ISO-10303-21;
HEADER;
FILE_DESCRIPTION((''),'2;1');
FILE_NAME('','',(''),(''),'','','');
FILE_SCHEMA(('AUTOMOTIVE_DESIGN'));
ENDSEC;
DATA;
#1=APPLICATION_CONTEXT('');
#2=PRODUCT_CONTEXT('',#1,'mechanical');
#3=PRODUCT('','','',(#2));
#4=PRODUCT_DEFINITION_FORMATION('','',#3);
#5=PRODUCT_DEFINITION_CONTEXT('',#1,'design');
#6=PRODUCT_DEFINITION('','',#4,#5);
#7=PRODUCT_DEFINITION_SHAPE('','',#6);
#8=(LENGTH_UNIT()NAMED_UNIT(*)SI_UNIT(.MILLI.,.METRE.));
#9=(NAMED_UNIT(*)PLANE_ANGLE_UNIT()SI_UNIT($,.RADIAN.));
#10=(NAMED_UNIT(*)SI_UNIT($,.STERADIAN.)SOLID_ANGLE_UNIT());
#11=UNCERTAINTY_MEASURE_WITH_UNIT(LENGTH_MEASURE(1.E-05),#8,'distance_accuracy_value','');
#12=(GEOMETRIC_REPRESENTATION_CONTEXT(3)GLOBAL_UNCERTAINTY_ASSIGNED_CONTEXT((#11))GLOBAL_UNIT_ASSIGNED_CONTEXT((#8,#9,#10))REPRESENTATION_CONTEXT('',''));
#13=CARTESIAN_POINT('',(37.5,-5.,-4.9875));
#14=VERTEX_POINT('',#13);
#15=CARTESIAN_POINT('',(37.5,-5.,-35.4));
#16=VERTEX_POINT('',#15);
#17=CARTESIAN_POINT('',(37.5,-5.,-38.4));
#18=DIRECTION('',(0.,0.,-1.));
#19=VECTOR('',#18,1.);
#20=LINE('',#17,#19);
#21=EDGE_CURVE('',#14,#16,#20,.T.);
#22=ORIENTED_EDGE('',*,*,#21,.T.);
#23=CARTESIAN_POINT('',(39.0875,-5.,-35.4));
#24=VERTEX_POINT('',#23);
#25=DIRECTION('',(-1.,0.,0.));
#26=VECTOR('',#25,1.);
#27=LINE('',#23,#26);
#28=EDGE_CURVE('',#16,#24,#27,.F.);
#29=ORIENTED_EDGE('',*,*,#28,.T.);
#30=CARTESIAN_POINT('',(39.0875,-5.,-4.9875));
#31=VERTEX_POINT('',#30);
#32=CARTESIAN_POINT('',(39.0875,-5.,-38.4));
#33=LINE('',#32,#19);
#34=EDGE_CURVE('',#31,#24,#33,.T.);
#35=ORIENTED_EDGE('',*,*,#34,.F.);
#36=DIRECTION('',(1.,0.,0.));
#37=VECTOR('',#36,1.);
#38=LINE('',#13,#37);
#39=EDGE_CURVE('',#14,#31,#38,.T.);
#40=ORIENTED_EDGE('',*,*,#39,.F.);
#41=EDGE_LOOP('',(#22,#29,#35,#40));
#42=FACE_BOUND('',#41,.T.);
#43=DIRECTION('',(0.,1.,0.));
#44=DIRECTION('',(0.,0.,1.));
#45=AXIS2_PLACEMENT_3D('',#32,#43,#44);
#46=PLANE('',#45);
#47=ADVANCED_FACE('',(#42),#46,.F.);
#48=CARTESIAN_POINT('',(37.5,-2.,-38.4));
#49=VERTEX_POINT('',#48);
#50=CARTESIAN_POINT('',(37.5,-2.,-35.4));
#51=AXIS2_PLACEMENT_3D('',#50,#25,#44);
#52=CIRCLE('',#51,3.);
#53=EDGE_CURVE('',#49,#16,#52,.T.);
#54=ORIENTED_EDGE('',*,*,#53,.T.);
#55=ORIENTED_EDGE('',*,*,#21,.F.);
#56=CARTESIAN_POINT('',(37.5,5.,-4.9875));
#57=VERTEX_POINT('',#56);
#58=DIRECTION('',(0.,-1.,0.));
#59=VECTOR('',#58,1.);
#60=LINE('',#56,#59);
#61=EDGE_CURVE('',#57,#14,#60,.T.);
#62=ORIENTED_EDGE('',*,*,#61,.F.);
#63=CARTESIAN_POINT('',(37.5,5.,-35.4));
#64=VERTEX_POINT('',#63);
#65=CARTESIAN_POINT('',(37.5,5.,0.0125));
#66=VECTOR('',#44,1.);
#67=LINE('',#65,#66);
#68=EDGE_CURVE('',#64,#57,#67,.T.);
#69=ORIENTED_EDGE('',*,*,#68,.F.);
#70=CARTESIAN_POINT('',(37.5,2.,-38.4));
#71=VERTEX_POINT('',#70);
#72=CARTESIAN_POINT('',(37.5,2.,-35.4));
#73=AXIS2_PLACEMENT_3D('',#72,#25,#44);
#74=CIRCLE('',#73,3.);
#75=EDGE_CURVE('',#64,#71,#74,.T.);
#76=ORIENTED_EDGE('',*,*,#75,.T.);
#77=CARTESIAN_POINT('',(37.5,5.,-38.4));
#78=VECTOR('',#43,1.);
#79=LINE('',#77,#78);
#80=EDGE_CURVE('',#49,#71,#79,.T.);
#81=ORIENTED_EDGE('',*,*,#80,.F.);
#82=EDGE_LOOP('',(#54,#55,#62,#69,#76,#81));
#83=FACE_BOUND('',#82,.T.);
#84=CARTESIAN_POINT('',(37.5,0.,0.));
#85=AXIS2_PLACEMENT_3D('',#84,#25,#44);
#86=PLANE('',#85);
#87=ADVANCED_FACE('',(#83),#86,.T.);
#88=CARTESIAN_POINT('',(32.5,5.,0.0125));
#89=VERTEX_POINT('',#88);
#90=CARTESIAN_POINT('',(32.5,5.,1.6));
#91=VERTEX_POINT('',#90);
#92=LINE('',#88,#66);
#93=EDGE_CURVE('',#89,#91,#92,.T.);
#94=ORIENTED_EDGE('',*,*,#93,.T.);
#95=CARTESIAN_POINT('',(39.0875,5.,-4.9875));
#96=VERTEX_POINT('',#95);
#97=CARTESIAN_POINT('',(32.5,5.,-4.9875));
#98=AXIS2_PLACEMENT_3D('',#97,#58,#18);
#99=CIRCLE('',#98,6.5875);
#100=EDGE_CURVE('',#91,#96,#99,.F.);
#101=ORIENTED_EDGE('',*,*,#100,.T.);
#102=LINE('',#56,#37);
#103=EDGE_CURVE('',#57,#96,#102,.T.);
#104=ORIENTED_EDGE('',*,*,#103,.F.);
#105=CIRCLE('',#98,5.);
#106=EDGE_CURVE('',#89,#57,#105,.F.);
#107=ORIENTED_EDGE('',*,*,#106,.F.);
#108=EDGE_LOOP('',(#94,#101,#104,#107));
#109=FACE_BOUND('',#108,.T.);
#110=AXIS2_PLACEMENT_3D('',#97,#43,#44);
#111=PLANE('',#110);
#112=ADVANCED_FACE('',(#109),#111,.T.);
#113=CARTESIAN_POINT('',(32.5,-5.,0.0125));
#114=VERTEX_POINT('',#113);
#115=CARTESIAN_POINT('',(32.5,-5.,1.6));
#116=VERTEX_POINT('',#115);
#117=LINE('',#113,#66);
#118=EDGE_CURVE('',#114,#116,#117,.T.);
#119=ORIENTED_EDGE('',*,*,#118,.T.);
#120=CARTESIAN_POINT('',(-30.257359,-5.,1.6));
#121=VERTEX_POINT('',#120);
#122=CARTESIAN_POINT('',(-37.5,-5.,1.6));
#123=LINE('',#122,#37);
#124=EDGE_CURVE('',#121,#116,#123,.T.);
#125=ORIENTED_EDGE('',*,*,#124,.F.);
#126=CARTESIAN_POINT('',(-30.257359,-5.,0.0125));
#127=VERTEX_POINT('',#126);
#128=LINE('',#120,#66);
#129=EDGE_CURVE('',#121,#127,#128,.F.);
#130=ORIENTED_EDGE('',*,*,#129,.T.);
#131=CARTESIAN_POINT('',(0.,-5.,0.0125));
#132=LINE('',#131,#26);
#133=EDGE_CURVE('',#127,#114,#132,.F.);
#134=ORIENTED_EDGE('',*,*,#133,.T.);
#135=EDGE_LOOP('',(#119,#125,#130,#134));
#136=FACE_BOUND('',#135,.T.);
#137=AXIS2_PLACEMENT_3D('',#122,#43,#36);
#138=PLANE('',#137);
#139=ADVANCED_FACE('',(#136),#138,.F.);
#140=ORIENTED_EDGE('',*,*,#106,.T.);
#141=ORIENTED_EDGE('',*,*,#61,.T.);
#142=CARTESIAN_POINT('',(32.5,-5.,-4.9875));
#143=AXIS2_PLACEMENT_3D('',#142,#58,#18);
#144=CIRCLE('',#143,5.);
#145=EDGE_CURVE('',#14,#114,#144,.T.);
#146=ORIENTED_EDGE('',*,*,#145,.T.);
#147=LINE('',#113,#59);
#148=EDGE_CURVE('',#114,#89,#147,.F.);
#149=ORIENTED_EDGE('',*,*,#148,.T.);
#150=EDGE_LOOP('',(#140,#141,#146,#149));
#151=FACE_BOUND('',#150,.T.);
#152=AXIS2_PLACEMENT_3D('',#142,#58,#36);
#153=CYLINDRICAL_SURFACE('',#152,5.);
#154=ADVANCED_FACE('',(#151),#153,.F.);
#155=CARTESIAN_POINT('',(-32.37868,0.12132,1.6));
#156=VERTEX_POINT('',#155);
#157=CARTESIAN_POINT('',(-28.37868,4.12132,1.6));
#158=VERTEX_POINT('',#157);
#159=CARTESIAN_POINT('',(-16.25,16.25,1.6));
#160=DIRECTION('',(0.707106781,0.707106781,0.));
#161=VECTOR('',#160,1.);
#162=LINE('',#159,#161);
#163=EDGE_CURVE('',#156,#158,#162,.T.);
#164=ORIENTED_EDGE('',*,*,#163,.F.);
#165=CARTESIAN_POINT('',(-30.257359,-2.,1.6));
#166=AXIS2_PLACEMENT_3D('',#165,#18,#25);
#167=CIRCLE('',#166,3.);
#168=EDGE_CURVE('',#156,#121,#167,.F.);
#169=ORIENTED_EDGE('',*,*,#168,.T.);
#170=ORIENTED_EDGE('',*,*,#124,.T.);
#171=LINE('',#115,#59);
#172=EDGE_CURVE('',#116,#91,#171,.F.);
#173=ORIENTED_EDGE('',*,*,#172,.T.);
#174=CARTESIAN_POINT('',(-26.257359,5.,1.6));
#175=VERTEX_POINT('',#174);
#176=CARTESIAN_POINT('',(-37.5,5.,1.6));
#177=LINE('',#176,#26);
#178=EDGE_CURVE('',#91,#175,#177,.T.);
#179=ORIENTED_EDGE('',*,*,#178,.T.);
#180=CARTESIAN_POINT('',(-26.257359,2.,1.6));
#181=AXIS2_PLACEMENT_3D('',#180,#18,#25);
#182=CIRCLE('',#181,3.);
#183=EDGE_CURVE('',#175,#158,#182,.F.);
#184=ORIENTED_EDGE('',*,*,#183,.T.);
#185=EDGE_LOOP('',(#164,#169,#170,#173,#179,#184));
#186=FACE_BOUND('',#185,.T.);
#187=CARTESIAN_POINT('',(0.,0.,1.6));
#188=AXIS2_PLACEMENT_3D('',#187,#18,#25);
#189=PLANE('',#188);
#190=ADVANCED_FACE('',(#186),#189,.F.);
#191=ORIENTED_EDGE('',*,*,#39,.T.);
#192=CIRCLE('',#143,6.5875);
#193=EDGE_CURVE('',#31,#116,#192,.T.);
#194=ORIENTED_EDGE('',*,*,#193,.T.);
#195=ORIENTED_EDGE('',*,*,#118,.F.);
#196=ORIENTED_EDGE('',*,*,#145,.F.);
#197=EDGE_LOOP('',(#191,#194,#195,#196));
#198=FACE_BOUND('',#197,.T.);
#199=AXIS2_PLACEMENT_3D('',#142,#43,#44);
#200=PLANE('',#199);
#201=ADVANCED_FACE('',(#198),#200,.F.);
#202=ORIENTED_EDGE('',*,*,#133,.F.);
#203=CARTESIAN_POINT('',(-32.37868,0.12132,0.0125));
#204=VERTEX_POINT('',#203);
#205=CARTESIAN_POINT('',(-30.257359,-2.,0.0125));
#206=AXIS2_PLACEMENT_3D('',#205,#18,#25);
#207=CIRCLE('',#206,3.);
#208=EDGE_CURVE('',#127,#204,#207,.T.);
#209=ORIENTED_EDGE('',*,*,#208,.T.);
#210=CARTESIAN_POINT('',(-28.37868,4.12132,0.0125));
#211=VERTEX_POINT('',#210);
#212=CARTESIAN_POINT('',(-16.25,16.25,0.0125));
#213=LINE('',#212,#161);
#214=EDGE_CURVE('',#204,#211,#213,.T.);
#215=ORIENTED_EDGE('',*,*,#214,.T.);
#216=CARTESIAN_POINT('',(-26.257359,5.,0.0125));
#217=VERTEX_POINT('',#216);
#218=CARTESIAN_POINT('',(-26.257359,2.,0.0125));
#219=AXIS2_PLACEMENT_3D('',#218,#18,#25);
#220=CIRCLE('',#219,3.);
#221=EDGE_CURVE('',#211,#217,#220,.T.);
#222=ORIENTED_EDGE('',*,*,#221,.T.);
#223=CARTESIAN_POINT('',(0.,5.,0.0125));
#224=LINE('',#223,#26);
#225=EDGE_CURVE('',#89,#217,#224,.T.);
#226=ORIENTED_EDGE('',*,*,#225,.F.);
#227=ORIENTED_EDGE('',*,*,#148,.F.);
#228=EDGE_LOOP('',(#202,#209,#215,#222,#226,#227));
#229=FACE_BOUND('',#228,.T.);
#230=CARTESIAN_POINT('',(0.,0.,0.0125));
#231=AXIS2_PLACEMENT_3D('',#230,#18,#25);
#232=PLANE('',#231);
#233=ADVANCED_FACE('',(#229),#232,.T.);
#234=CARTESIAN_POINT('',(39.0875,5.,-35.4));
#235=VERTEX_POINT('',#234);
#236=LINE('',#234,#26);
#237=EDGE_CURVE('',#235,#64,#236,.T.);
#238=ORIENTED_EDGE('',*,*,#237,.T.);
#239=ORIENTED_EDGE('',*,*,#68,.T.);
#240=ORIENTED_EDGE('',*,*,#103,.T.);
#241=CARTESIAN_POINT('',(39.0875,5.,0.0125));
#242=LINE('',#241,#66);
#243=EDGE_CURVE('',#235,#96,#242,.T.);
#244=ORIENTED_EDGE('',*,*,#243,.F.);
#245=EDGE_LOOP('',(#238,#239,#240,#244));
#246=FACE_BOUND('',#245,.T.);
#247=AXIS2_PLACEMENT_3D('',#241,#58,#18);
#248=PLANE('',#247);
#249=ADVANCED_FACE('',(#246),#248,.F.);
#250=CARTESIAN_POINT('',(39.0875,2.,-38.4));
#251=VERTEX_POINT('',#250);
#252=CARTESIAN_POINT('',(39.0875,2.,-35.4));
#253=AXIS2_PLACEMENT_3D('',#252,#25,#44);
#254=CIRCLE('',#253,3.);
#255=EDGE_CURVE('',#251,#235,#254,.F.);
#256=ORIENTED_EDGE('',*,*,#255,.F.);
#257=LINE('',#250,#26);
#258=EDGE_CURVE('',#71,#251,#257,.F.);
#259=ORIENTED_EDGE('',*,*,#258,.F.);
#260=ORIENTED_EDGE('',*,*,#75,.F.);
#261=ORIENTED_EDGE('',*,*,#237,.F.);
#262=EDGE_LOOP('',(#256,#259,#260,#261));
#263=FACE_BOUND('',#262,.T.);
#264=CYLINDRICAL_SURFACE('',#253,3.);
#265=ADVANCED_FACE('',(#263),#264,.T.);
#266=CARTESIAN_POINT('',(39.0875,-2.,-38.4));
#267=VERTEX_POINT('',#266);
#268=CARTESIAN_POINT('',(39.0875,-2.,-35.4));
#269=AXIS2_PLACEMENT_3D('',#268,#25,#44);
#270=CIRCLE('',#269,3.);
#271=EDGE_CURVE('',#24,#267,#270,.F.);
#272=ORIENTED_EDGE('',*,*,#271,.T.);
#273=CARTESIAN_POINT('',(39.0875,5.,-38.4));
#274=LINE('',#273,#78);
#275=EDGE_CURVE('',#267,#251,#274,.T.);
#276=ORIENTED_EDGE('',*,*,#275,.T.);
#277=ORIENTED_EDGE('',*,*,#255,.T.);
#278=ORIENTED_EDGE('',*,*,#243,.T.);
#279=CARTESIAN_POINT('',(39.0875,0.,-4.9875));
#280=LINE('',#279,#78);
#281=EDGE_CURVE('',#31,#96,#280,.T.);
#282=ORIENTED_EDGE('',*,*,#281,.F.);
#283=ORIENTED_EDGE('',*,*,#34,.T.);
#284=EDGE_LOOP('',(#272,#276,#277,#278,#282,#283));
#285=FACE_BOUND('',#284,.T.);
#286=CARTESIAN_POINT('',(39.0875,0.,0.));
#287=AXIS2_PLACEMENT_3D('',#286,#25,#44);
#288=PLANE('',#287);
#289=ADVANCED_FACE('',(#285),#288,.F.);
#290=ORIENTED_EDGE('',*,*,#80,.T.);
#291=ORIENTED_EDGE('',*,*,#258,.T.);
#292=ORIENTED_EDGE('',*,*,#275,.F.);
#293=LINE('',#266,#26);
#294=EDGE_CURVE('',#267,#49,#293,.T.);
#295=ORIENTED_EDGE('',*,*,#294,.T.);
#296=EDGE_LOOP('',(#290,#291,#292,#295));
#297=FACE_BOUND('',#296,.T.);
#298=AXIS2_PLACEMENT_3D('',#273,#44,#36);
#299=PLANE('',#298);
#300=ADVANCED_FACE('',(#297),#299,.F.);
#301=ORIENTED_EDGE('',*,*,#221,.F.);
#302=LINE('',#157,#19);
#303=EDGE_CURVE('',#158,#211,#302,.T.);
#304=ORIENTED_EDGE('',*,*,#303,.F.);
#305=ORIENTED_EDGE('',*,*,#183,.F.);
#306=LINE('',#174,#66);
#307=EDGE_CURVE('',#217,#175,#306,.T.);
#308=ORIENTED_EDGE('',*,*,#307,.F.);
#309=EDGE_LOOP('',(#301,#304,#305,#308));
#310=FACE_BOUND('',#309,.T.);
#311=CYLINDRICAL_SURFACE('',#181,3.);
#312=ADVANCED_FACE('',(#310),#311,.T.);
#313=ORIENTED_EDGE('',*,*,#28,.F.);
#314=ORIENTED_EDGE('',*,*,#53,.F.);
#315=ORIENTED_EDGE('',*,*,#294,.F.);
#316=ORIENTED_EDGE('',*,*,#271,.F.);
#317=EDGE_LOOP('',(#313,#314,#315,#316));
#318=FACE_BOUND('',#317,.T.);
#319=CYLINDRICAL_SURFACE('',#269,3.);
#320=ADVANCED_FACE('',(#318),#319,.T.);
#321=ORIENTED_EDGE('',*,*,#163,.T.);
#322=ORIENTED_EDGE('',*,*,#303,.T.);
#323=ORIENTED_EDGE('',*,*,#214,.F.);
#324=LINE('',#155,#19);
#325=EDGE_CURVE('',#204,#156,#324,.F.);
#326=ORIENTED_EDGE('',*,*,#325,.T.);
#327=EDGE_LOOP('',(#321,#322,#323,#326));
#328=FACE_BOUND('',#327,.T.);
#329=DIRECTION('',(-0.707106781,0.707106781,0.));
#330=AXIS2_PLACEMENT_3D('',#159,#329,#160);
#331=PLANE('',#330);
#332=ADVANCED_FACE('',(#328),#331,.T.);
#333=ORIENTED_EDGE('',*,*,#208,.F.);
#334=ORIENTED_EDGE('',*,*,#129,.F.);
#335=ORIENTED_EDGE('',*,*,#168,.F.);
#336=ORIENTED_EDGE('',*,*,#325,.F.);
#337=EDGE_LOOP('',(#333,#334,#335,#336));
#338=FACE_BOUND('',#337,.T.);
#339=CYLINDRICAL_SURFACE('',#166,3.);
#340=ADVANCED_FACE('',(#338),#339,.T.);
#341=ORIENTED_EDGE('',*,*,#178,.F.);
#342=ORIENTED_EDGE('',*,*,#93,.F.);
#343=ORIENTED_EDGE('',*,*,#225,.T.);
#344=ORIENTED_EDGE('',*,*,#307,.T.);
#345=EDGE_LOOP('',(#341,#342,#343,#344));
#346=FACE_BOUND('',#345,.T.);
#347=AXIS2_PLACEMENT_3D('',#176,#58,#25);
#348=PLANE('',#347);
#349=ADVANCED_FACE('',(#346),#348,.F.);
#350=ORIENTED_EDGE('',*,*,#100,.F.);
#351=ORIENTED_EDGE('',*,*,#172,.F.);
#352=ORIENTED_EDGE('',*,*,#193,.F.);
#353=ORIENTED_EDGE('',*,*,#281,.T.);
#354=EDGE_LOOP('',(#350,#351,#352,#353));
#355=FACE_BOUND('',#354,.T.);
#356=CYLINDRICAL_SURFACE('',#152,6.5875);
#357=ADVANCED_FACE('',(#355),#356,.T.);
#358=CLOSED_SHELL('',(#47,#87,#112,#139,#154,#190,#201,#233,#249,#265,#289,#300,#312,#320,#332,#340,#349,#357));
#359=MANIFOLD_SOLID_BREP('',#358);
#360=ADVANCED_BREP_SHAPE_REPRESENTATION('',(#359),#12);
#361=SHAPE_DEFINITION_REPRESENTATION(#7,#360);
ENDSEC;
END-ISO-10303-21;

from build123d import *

# Parameters (mm, degrees)
SKETCH1_W                    = 75
SKETCH1_H                    = 10
BOSS_EXTRUDE1_DEPTH          = 1.6
CUT_EXTRUDE1_DEPTH           = 38.865683673
CUT_EXTRUDE1_DEPTH_BACK      = 10
CONVERT_SOLID1_DEPTH         = 0.0125
EDGE_FLANGE1_STRIP_W         = 16.35
EDGE_FLANGE1_STRIP_H         = 1.5875
EDGE_FLANGE1_STRIP_CUT_DEPTH = 10
EDGE_FLANGE1_DEPTH           = 10
FILLET1_R                    = 3


# Read off the part's stored shape, not the designer's step: Convert-Solid1
# Sheet-metal steps are written as plain solids
with BuildPart() as part:
    # Sketch1 → Boss-Extrude1 (new body)
    with BuildSketch(Plane.XY):
        Rectangle(SKETCH1_W, SKETCH1_H)
    extrude(amount=BOSS_EXTRUDE1_DEPTH)

    # Sketch2 → Cut-Extrude1 (cut, two sides: drawn at the far end of the back side and taken through both)
    with BuildSketch(Plane.XY.offset(1.6).offset(-CUT_EXTRUDE1_DEPTH_BACK)):
        Polygon((-37.5, 5), (-37.5, -5), (-27.5, 5), align=None)
    extrude(amount=CUT_EXTRUDE1_DEPTH + CUT_EXTRUDE1_DEPTH_BACK, mode=Mode.SUBTRACT)

    # Convert-Solid1 outline → Convert-Solid1 (cut)
    with BuildSketch(Plane.XY):
        Polygon((37.5, -5), (37.5, 5), (-27.5, 5), (-37.5, -5), align=None)
    extrude(amount=CONVERT_SOLID1_DEPTH, mode=Mode.SUBTRACT)

    # Edge-Flange1 strip (across the edge) → Edge-Flange1 strip cut (cut)
    with BuildSketch(Plane(origin=(37.5, 5, 0.0125), x_dir=(-1, 0, 0), z_dir=(0, -1, 0))):
        with Locations((-3.175, -0.79375)):
            Rectangle(EDGE_FLANGE1_STRIP_W, EDGE_FLANGE1_STRIP_H)
    extrude(amount=EDGE_FLANGE1_STRIP_CUT_DEPTH, mode=Mode.SUBTRACT)

    # Edge-Flange1 section (across the edge) → Edge-Flange1 (add)
    with BuildSketch(Plane(origin=(37.5, 5, 0.0125), x_dir=(-1, 0, 0), z_dir=(0, -1, 0))):
        with BuildLine():
            Line((-1.5875, 5), (-1.5875, 38.4125))
            Line((-1.5875, 38.4125), (0, 38.4125))
            Line((0, 38.4125), (0, 5))
            ThreePointArc((0, 5), (1.464466094, 1.464466094), (5, 0))
            Line((5, 0), (5, -1.5875))
            ThreePointArc((5, -1.5875), (0.341934079, 0.341934079), (-1.5875, 5))
        make_face()
    extrude(amount=EDGE_FLANGE1_DEPTH)

    # Fillet1
    fillet1_edges = [part.edges().sort_by_distance(p)[0] for p in [
        (38.29375, 5, -38.4),
        (38.29375, -5, -38.4),
        (-37.5, -5, 0.80625),
        (-27.5, 5, 0.80625),
    ]]
    fillet(fillet1_edges, radius=FILLET1_R)


solid = part.part
